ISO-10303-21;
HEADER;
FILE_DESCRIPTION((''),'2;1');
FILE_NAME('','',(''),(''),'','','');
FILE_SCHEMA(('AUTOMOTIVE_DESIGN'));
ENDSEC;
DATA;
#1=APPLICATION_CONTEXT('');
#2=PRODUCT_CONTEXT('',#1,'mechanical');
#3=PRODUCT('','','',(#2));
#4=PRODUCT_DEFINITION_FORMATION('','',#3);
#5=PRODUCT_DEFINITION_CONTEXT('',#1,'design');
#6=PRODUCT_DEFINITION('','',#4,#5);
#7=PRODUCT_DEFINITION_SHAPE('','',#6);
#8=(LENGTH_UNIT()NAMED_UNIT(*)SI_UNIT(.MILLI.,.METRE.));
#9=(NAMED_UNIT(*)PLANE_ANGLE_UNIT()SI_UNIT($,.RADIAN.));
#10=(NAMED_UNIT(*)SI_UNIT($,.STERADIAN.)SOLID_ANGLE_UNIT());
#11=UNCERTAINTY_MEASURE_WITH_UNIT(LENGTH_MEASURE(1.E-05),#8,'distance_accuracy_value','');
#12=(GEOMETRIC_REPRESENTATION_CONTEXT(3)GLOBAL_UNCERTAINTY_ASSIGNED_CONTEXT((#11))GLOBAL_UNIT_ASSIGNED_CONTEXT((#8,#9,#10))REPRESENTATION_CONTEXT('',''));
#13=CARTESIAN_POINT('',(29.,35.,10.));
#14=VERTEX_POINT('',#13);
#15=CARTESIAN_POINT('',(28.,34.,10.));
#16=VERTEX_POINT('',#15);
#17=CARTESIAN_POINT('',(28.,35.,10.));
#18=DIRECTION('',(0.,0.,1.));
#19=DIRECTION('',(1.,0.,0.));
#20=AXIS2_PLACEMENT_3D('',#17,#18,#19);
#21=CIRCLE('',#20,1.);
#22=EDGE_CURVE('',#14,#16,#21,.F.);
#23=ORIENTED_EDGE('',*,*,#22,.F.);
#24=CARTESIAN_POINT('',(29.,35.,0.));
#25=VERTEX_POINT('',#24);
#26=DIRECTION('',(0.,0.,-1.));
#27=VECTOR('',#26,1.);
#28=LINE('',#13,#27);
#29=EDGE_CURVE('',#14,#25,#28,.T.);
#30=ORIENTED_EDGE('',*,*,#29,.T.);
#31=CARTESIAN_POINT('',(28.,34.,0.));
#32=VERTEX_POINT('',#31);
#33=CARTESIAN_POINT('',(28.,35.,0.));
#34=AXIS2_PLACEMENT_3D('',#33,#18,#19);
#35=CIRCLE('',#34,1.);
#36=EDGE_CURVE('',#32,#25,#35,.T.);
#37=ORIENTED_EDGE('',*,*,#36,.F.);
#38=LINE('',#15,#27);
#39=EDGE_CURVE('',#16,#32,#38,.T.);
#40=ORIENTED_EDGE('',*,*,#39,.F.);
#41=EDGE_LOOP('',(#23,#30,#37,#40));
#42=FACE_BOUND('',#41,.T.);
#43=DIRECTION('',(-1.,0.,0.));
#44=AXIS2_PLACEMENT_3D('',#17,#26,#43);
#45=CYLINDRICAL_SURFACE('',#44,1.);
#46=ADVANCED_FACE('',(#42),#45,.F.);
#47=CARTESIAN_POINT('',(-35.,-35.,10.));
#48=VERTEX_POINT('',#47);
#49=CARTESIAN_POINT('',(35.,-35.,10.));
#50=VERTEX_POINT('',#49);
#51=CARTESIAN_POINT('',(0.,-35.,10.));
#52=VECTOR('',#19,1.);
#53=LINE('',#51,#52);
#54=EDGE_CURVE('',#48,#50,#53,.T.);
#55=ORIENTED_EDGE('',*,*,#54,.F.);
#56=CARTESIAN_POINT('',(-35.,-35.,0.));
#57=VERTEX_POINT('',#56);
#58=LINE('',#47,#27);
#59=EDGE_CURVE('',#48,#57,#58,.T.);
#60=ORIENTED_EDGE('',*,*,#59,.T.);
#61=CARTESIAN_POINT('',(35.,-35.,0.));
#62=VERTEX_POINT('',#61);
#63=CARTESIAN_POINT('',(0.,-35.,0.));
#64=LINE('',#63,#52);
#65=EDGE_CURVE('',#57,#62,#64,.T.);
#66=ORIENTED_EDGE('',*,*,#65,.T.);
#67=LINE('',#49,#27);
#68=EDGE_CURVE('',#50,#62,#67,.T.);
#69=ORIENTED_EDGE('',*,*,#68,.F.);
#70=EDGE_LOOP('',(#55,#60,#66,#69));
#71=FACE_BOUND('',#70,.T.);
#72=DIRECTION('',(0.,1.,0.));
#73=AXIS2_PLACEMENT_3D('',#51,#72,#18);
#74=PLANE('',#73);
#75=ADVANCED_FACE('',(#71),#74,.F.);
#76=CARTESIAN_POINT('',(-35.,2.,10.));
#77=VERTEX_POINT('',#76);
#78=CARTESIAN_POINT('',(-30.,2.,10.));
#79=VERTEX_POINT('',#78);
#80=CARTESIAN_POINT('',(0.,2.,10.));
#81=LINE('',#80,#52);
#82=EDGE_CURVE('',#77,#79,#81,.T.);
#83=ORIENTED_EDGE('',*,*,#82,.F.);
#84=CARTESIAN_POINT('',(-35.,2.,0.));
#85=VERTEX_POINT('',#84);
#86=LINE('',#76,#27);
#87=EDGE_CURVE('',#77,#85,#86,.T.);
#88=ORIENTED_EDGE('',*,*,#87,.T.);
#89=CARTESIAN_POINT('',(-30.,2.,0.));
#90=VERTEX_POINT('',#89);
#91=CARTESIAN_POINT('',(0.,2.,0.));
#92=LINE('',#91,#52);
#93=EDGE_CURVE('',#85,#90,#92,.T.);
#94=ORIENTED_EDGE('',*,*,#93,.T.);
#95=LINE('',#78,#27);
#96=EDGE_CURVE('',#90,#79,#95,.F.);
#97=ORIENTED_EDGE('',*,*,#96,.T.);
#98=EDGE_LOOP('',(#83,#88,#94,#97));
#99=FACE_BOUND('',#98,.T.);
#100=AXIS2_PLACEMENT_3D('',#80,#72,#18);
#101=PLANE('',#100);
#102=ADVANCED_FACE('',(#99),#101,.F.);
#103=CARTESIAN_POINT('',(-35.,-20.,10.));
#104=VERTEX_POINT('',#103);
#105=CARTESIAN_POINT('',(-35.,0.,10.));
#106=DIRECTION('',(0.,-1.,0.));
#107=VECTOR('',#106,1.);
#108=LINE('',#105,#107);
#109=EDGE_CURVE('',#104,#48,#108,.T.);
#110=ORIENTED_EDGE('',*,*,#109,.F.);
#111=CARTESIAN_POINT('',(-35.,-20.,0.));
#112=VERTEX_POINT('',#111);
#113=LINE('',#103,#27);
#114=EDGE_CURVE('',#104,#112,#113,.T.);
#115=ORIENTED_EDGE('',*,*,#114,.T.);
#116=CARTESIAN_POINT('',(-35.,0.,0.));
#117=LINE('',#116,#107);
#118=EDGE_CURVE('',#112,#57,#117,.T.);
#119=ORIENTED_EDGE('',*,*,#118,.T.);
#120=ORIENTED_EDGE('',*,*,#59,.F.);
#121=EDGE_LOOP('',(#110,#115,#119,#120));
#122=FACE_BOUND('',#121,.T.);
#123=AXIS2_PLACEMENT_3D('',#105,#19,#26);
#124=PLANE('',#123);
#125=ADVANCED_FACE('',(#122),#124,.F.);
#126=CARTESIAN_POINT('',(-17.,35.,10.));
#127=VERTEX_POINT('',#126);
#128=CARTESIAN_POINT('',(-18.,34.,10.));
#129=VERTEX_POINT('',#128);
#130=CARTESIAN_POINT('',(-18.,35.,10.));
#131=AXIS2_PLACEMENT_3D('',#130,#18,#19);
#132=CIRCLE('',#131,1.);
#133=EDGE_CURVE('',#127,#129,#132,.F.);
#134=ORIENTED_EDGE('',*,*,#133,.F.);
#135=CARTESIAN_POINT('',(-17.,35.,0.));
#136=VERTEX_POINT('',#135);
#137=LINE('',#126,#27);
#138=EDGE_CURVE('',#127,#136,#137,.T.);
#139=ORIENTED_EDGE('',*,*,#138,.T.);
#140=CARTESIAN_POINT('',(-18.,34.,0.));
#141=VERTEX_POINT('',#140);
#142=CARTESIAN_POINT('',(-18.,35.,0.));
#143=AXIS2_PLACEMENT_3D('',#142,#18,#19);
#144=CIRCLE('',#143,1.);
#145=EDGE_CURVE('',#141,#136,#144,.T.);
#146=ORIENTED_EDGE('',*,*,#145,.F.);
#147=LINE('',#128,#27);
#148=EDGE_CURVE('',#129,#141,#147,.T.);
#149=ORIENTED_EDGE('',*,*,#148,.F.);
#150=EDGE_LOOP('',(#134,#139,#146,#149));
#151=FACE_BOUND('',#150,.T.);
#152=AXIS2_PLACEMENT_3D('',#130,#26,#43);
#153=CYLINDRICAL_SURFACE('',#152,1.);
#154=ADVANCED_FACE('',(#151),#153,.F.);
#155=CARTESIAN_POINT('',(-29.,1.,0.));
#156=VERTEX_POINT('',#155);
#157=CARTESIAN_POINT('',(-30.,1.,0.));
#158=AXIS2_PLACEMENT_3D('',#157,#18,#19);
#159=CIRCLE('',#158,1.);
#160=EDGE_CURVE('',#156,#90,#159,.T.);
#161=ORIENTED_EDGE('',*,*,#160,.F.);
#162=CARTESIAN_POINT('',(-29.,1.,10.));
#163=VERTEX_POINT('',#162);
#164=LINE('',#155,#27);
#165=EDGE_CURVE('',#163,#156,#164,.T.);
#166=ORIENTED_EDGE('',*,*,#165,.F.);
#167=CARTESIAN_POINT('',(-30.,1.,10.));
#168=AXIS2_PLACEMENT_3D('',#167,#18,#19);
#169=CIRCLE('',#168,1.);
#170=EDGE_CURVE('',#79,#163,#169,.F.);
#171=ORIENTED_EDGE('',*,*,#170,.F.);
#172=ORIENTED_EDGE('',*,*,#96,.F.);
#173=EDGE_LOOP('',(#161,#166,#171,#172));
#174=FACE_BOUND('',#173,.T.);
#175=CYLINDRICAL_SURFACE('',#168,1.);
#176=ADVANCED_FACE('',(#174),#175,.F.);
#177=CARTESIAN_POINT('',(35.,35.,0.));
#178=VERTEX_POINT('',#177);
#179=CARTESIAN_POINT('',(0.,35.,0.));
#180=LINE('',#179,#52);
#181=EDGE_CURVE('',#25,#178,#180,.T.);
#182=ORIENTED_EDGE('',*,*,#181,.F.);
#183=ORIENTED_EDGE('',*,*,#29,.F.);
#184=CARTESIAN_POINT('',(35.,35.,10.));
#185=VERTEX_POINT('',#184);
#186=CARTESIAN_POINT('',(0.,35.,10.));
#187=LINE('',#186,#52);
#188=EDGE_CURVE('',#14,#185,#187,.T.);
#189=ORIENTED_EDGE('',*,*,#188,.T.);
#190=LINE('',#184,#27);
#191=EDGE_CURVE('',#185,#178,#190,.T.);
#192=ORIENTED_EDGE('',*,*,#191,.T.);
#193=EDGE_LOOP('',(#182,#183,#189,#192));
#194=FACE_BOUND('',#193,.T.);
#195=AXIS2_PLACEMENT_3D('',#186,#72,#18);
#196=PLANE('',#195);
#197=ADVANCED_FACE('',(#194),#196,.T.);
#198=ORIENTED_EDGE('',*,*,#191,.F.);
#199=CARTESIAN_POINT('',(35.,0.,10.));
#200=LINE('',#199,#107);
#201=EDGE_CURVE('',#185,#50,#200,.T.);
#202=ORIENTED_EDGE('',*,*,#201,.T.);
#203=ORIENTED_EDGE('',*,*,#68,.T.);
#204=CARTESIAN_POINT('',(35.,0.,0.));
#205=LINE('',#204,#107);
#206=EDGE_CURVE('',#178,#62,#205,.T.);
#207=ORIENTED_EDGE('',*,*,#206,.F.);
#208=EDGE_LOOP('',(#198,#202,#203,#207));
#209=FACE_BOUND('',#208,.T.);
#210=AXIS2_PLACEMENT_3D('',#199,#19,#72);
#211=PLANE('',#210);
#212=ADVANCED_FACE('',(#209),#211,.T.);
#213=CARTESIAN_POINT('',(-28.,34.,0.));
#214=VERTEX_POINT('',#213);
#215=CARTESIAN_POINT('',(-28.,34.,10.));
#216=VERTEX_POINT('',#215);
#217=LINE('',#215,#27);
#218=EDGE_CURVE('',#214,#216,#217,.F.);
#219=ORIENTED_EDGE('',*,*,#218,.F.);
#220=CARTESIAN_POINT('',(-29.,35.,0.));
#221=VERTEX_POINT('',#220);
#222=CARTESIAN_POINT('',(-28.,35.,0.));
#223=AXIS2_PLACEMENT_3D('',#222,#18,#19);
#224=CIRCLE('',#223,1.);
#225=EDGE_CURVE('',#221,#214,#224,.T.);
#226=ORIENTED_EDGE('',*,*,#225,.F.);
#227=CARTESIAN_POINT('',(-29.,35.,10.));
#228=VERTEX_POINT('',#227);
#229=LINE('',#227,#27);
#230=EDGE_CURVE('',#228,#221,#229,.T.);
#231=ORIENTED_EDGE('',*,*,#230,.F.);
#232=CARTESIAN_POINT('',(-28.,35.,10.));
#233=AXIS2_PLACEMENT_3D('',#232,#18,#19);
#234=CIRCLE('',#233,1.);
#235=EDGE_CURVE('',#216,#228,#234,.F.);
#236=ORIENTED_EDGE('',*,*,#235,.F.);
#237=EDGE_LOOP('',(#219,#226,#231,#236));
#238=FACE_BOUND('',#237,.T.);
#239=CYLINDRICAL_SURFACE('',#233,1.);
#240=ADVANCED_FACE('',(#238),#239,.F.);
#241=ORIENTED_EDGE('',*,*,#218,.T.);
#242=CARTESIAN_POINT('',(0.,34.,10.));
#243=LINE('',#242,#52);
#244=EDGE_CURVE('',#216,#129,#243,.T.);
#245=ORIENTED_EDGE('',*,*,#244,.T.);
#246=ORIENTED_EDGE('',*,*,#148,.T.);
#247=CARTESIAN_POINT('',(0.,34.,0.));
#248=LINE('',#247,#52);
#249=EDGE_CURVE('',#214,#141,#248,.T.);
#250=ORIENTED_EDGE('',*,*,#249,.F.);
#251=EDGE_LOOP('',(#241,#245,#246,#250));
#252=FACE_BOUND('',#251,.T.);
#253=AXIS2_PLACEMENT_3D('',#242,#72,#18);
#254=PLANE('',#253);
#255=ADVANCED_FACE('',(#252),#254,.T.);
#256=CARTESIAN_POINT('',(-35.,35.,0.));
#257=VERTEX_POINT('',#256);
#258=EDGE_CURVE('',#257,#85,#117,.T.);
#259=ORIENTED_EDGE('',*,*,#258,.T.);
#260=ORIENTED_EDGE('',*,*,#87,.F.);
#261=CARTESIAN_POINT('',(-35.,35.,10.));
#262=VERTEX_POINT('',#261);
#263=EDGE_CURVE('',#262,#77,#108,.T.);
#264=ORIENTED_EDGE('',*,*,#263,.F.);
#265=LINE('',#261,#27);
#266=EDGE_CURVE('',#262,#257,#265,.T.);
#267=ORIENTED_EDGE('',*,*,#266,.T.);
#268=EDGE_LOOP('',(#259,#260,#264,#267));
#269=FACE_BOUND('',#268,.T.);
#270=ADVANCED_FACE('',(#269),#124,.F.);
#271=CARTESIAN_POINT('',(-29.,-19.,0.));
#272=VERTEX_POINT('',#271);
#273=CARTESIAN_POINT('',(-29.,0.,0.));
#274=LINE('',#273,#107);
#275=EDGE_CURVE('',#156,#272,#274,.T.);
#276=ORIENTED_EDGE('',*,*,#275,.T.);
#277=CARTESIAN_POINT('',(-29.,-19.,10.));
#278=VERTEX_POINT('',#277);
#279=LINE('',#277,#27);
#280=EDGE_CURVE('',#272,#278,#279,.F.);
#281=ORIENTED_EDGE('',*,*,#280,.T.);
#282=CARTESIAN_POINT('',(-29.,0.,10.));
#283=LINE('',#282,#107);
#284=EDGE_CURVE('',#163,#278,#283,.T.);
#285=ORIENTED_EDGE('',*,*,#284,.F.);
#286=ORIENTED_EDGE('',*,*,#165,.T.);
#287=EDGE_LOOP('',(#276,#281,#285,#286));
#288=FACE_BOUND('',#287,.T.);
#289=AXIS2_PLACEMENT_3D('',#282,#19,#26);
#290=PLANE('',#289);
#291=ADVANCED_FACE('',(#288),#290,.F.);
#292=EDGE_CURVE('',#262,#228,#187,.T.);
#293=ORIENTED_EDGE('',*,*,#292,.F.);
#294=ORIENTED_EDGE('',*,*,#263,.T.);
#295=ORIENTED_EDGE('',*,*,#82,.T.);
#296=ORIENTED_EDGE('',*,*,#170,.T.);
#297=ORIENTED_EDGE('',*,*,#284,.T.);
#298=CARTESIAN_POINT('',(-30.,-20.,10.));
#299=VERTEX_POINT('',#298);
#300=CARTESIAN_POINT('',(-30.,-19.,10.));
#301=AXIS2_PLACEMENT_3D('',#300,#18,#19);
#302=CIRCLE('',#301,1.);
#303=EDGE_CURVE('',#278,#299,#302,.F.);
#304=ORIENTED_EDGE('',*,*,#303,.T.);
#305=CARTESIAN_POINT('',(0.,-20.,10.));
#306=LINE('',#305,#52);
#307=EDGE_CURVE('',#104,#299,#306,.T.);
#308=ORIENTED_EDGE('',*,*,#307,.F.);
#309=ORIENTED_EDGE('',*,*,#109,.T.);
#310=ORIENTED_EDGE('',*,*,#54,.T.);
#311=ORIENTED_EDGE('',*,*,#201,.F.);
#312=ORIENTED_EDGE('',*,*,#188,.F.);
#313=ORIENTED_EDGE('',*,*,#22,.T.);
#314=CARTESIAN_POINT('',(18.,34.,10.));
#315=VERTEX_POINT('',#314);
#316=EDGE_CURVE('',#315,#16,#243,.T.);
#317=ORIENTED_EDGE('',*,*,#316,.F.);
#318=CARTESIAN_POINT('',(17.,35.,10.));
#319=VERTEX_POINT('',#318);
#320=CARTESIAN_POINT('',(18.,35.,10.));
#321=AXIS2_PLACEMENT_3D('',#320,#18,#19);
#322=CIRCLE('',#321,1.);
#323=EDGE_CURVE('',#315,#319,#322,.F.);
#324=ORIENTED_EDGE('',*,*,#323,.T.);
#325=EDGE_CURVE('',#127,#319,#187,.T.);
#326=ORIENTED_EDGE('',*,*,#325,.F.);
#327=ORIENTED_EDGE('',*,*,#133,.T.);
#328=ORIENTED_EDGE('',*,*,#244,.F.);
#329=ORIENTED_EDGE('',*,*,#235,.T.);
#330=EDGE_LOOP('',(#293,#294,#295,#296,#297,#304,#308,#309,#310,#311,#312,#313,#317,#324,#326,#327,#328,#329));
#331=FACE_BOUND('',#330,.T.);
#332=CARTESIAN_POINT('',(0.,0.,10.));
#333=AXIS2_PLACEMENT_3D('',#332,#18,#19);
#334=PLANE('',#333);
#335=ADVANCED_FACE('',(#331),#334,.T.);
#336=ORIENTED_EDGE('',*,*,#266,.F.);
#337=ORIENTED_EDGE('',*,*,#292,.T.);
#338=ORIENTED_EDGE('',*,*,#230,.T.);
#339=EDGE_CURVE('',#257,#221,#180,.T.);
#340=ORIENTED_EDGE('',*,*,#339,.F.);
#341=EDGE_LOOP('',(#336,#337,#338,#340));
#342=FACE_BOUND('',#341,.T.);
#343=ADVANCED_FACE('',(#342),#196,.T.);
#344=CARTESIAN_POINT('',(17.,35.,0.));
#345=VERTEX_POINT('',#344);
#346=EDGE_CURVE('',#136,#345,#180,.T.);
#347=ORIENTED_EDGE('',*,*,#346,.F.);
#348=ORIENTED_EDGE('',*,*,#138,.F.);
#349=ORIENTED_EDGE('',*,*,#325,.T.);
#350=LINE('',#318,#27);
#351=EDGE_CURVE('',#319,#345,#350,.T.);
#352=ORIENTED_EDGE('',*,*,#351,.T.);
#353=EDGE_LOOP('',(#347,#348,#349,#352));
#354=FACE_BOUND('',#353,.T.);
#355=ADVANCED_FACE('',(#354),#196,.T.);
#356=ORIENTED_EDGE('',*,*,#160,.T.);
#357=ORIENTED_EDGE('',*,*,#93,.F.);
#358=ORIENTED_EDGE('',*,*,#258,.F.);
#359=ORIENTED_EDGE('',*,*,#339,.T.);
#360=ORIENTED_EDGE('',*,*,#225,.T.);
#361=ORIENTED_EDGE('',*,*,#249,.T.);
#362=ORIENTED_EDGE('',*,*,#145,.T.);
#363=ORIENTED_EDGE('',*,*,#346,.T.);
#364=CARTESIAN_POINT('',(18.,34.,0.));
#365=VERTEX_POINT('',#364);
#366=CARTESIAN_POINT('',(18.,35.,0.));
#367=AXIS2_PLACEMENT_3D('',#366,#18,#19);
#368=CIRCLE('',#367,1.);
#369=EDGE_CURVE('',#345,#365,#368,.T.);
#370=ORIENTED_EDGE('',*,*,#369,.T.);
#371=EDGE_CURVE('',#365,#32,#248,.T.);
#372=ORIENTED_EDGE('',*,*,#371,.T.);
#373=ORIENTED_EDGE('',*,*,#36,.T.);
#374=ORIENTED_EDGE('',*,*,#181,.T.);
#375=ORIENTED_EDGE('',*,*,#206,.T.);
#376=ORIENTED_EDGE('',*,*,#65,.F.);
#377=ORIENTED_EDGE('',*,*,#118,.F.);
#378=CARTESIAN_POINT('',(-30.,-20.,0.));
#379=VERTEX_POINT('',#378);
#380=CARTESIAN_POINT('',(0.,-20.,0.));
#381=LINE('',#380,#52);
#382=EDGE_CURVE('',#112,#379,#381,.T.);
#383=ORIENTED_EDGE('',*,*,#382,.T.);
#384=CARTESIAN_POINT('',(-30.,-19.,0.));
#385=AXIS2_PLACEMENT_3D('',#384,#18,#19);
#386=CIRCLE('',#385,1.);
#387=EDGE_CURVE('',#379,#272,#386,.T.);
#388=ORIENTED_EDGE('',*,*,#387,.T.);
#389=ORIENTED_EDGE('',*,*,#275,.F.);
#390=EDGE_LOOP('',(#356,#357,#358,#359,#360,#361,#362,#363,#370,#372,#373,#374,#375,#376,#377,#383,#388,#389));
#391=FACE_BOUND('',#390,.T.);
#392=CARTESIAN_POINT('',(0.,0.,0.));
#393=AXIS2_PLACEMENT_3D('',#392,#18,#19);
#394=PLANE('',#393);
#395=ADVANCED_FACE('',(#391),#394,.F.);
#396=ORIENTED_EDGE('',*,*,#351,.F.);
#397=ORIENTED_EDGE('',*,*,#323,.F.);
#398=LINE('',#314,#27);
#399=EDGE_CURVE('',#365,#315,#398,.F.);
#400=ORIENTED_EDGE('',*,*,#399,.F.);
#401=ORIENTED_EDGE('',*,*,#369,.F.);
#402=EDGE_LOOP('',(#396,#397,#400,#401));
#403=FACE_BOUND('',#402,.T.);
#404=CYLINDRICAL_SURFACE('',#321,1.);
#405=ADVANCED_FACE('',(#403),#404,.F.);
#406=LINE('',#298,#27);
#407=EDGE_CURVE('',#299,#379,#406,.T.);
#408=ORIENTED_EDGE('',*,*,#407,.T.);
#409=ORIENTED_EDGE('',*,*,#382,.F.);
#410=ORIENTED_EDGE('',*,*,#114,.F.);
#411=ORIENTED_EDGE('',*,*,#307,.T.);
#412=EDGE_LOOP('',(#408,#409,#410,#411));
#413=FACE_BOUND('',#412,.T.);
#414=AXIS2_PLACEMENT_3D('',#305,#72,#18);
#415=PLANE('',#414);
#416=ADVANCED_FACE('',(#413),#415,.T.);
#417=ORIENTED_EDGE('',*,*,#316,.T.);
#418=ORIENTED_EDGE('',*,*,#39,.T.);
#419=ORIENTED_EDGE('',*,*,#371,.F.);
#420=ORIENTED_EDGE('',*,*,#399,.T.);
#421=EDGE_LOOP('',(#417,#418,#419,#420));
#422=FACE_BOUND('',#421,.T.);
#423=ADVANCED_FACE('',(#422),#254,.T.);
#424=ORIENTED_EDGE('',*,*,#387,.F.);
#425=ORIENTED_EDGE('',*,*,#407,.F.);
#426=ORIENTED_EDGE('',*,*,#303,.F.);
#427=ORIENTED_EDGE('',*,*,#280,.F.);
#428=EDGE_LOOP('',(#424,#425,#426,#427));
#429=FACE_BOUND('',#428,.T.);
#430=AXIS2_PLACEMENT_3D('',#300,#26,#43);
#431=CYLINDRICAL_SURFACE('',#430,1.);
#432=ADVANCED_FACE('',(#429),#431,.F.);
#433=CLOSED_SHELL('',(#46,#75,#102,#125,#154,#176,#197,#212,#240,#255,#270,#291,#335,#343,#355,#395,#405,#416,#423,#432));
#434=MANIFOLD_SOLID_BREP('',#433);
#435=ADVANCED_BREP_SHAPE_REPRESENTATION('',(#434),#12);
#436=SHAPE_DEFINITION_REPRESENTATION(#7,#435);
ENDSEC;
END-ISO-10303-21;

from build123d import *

# Parameters (mm, degrees)
EXTRUDE_1_DEPTH = 10
FILLET_1_R      = 1


with BuildPart() as part:
    # 草图4 → 凸台-拉伸1 (new body)
    with BuildSketch(Plane.XY):
        Polygon((-29, 35), (-35, 35), (-35, 2), (-29, 2), (-29, -20), (-35, -20), (-35, -35), (35, -35), (35, 35), (29, 35), (29, 34), (17, 34), (17, 35), (-17, 35), (-17, 34), (-29, 34), align=None)
    extrude(amount=EXTRUDE_1_DEPTH)

    # 圆角1
    fillet_1_edges = [part.edges().sort_by_distance(p)[0] for p in [
        (-29, -20, 5),
        (-29, 2, 5),
        (29, 34, 5),
        (17, 34, 5),
        (-17, 34, 5),
        (-29, 34, 5),
    ]]
    fillet(fillet_1_edges, radius=FILLET_1_R - 0.0001)  # a hair under: the kernel refuses the full size


solid = part.part
